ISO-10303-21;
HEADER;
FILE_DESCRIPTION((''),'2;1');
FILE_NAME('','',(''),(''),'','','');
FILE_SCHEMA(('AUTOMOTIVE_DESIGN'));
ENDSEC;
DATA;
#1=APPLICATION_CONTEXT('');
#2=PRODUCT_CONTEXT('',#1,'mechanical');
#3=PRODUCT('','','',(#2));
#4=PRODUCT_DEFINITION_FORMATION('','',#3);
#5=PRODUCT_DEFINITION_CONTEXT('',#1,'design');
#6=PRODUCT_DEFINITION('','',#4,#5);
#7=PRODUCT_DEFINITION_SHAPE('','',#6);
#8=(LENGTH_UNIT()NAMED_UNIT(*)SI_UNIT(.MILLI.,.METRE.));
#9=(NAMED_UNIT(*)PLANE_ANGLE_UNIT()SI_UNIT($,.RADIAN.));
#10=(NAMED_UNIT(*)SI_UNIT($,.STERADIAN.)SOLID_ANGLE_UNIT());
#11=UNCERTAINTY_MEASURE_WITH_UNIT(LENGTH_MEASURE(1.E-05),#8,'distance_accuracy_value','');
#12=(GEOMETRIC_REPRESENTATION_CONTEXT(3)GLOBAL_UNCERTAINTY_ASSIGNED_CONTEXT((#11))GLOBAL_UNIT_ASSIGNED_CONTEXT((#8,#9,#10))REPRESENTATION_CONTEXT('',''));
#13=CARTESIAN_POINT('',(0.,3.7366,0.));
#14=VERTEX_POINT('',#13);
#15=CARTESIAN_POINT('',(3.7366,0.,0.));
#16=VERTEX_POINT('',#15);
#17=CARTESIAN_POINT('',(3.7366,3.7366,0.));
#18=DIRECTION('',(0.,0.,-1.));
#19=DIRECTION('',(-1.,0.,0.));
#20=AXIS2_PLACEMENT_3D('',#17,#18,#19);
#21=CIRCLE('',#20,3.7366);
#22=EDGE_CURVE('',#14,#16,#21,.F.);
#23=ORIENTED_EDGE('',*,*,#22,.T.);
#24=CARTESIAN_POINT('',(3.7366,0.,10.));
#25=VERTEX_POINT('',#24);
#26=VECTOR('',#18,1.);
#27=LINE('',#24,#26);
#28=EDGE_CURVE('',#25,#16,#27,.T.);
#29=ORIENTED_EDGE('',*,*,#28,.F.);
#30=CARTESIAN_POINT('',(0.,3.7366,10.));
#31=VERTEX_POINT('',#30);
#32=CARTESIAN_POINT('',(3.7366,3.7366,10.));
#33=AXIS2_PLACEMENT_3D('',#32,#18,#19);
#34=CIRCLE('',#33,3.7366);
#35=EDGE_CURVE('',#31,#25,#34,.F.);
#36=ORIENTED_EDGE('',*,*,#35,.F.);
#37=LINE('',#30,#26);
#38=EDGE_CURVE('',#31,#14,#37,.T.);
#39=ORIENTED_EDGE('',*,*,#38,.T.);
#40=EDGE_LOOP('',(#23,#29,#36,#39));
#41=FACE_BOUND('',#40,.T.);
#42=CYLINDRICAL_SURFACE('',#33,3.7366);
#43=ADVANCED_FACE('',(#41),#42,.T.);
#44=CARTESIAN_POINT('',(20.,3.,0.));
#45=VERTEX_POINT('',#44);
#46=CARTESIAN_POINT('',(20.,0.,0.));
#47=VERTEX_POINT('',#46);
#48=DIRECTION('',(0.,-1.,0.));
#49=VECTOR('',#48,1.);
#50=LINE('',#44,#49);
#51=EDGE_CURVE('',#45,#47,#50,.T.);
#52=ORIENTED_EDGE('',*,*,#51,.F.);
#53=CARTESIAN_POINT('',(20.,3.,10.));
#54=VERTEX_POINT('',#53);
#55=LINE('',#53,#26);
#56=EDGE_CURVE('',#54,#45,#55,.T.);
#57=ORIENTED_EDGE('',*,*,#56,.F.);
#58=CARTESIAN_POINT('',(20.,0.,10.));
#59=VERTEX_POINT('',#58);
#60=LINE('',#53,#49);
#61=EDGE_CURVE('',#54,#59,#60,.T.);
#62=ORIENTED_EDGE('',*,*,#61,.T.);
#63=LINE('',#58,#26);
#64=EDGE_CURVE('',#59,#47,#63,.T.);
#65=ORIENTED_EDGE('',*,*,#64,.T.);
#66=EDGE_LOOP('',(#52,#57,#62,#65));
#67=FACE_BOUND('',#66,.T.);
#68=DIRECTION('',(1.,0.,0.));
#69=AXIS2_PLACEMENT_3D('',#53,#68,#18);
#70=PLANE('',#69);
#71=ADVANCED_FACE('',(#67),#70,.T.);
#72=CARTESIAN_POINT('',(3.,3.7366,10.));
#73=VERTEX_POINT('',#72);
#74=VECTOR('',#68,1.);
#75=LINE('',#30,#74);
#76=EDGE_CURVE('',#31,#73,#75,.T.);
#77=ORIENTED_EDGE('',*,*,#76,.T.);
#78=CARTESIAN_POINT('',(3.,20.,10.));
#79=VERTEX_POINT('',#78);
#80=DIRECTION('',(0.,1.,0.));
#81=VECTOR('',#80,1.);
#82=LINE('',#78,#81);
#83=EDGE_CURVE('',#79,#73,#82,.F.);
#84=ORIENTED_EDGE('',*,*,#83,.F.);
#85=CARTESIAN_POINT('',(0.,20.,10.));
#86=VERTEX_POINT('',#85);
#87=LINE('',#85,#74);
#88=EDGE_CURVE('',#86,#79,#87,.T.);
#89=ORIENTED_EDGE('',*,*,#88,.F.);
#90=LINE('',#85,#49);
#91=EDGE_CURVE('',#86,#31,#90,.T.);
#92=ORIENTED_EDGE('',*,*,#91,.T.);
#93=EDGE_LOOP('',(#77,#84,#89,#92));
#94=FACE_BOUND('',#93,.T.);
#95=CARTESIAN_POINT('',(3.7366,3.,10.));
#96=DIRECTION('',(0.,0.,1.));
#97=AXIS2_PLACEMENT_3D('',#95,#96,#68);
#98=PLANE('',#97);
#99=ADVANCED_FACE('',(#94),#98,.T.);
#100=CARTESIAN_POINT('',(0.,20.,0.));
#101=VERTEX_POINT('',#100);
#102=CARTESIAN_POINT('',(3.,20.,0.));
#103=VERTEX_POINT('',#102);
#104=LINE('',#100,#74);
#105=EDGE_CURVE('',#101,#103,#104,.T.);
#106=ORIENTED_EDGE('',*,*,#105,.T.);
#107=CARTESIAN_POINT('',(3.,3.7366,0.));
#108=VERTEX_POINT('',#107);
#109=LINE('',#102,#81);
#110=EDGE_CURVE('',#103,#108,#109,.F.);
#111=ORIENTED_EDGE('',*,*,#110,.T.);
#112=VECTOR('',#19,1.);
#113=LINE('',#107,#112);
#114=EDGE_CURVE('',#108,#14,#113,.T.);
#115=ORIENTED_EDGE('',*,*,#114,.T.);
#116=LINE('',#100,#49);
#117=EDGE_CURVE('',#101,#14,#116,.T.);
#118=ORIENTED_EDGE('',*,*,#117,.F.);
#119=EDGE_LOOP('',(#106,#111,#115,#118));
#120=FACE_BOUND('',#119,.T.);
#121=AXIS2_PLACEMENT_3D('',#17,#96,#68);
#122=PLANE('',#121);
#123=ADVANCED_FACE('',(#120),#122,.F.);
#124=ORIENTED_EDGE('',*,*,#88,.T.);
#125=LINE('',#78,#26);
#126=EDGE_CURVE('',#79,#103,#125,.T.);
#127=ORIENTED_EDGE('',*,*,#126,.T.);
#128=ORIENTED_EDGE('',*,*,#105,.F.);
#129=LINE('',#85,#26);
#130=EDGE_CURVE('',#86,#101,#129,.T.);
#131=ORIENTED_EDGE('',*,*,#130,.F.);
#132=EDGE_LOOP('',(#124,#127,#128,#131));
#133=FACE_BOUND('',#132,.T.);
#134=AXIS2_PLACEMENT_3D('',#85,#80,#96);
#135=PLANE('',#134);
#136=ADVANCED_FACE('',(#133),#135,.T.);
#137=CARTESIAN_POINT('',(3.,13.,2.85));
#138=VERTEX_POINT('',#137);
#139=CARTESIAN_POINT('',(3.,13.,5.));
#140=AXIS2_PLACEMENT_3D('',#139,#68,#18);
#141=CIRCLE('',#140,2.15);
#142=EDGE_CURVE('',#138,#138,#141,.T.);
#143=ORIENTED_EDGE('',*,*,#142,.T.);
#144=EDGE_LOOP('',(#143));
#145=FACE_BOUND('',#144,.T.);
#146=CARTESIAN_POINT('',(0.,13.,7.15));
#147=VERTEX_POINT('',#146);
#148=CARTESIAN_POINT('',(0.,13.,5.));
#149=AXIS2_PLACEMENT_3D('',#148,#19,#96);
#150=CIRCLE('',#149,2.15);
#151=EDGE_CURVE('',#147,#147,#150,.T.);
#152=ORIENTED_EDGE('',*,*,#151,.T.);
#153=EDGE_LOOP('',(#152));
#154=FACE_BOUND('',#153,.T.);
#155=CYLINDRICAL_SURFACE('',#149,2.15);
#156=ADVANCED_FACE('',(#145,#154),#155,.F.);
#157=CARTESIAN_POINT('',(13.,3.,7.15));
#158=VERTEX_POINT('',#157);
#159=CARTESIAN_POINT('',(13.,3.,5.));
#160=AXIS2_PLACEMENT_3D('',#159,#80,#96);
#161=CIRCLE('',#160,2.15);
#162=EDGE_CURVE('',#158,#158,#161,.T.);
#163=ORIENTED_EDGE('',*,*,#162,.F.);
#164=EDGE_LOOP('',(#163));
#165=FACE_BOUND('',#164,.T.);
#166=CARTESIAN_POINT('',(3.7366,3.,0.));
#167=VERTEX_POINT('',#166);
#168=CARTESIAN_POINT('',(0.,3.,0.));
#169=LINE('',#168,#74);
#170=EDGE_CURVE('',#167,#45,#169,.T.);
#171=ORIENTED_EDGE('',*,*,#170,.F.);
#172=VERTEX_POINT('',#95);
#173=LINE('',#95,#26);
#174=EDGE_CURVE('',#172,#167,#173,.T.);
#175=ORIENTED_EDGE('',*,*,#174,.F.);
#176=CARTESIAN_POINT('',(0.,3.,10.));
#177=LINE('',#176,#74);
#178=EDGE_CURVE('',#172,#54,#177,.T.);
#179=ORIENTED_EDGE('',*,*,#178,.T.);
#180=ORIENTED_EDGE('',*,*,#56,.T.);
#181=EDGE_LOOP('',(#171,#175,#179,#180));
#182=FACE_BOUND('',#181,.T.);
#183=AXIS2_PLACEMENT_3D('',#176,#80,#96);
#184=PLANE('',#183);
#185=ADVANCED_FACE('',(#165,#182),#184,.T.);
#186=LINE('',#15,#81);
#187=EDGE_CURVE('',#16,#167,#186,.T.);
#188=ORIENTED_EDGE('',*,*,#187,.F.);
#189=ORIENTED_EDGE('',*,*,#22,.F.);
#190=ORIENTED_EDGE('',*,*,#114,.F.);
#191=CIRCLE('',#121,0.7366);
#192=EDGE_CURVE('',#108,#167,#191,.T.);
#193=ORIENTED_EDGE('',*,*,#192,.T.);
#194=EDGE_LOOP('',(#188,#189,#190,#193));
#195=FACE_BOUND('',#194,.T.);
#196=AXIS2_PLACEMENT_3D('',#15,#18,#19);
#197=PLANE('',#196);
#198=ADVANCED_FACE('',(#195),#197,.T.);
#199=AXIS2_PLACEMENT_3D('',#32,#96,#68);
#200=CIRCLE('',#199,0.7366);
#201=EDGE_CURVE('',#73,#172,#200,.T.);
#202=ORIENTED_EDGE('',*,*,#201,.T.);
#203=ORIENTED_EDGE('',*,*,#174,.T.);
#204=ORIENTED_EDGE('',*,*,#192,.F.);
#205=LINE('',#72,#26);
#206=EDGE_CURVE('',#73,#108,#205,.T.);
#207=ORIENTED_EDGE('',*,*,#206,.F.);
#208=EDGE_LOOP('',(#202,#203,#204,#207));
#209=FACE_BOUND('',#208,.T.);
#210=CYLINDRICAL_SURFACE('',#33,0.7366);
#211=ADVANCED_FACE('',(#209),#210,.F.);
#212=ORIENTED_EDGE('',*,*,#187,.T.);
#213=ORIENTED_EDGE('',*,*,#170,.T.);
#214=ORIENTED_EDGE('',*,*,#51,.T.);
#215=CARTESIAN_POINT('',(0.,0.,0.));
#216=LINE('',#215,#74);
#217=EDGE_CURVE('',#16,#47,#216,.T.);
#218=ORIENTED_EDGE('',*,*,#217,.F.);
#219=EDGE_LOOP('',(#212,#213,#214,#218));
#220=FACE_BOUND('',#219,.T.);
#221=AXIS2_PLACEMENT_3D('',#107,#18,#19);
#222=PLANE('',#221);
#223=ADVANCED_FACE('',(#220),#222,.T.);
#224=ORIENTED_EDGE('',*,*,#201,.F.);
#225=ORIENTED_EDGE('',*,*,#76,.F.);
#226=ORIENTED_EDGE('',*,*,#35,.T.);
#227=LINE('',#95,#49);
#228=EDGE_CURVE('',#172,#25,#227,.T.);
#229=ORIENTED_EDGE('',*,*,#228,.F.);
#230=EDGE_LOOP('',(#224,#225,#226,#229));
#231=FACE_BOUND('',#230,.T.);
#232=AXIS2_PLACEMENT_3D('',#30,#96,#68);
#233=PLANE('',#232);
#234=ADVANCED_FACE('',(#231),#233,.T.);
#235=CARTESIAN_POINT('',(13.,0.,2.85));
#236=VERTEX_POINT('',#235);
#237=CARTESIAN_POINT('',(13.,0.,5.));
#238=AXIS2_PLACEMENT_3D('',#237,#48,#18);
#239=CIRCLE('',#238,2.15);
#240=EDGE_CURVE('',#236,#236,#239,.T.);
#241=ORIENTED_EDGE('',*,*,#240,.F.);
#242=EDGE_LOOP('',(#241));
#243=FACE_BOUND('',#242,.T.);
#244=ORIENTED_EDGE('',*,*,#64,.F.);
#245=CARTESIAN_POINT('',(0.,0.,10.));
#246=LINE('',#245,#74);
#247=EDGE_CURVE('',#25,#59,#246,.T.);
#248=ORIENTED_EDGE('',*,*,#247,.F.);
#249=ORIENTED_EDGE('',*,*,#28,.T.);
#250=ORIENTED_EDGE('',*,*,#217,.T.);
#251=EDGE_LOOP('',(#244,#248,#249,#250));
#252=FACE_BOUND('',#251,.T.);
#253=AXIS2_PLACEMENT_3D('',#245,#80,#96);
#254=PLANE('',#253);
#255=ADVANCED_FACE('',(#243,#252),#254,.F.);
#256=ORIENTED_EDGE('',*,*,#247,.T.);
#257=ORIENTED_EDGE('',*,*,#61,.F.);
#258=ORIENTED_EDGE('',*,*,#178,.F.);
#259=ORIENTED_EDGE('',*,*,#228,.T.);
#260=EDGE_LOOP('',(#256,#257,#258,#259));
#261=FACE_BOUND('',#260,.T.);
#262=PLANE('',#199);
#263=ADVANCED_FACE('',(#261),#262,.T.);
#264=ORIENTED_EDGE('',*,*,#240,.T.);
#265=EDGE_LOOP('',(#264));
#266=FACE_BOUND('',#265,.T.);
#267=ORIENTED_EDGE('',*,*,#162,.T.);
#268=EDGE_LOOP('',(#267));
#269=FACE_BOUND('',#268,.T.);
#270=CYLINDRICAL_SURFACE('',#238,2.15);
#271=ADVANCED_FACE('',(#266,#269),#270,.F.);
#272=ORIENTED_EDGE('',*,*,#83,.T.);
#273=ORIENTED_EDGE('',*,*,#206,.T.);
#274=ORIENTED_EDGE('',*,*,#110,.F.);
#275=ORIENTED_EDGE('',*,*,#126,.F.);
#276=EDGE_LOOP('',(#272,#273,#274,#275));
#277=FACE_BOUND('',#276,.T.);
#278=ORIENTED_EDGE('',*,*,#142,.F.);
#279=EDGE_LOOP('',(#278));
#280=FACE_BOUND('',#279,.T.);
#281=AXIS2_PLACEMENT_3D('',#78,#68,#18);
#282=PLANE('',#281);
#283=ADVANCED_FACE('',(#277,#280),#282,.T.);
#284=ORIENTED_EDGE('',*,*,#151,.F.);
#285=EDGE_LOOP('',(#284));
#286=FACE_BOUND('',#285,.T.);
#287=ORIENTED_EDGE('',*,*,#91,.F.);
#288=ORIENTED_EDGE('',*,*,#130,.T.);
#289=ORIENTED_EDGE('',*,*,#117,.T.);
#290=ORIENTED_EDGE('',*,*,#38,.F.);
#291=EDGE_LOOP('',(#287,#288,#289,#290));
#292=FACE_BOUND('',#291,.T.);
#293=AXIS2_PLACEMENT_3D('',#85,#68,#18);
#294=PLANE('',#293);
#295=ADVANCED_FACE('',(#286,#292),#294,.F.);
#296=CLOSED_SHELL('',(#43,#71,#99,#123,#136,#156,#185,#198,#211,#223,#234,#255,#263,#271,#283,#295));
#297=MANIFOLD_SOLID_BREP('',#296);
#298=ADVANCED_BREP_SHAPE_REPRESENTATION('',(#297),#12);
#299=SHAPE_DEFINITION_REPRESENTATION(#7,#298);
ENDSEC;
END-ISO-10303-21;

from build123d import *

# Parameters (mm, degrees)
SM_BASE_FLANGE_2_DEPTH  = 10
HOLE_WIZARD_4_3_4_3_1_D = 4.3
HOLE_WIZARD_4_3_4_3_2_D = 4.3


# Sheet-metal steps are written as plain solids
with BuildPart() as part:
    # 草图18 → 基体-法兰2 (new body)
    with BuildSketch(Plane.XY):
        with BuildLine():
            Line((0, 20), (0, 3.7366))
            ThreePointArc((0, 3.7366), (1.094424801, 1.094424801), (3.7366, 0))
            Line((3.7366, 0), (20, 0))
            Line((20, 0), (20, 3))
            Line((20, 3), (3.7366, 3))
            ThreePointArc((3.7366, 3), (3.215745145, 3.215745145), (3, 3.7366))
            Line((3, 3.7366), (3, 20))
            Line((3, 20), (0, 20))
        make_face()
    extrude(amount=SM_BASE_FLANGE_2_DEPTH)

    # Ø4.3 (4.3) 直径孔1 (through all)
    with Locations(Plane.ZY):
        with Locations((5, 13)):
            Hole(HOLE_WIZARD_4_3_4_3_1_D / 2)

    # Ø4.3 (4.3) 直径孔2 (through all)
    with Locations(Plane(origin=(0, 0, 0), x_dir=(-1, 0, 0), z_dir=(0, -1, 0))):
        with Locations((-13, -5)):
            Hole(HOLE_WIZARD_4_3_4_3_2_D / 2)


solid = part.part
